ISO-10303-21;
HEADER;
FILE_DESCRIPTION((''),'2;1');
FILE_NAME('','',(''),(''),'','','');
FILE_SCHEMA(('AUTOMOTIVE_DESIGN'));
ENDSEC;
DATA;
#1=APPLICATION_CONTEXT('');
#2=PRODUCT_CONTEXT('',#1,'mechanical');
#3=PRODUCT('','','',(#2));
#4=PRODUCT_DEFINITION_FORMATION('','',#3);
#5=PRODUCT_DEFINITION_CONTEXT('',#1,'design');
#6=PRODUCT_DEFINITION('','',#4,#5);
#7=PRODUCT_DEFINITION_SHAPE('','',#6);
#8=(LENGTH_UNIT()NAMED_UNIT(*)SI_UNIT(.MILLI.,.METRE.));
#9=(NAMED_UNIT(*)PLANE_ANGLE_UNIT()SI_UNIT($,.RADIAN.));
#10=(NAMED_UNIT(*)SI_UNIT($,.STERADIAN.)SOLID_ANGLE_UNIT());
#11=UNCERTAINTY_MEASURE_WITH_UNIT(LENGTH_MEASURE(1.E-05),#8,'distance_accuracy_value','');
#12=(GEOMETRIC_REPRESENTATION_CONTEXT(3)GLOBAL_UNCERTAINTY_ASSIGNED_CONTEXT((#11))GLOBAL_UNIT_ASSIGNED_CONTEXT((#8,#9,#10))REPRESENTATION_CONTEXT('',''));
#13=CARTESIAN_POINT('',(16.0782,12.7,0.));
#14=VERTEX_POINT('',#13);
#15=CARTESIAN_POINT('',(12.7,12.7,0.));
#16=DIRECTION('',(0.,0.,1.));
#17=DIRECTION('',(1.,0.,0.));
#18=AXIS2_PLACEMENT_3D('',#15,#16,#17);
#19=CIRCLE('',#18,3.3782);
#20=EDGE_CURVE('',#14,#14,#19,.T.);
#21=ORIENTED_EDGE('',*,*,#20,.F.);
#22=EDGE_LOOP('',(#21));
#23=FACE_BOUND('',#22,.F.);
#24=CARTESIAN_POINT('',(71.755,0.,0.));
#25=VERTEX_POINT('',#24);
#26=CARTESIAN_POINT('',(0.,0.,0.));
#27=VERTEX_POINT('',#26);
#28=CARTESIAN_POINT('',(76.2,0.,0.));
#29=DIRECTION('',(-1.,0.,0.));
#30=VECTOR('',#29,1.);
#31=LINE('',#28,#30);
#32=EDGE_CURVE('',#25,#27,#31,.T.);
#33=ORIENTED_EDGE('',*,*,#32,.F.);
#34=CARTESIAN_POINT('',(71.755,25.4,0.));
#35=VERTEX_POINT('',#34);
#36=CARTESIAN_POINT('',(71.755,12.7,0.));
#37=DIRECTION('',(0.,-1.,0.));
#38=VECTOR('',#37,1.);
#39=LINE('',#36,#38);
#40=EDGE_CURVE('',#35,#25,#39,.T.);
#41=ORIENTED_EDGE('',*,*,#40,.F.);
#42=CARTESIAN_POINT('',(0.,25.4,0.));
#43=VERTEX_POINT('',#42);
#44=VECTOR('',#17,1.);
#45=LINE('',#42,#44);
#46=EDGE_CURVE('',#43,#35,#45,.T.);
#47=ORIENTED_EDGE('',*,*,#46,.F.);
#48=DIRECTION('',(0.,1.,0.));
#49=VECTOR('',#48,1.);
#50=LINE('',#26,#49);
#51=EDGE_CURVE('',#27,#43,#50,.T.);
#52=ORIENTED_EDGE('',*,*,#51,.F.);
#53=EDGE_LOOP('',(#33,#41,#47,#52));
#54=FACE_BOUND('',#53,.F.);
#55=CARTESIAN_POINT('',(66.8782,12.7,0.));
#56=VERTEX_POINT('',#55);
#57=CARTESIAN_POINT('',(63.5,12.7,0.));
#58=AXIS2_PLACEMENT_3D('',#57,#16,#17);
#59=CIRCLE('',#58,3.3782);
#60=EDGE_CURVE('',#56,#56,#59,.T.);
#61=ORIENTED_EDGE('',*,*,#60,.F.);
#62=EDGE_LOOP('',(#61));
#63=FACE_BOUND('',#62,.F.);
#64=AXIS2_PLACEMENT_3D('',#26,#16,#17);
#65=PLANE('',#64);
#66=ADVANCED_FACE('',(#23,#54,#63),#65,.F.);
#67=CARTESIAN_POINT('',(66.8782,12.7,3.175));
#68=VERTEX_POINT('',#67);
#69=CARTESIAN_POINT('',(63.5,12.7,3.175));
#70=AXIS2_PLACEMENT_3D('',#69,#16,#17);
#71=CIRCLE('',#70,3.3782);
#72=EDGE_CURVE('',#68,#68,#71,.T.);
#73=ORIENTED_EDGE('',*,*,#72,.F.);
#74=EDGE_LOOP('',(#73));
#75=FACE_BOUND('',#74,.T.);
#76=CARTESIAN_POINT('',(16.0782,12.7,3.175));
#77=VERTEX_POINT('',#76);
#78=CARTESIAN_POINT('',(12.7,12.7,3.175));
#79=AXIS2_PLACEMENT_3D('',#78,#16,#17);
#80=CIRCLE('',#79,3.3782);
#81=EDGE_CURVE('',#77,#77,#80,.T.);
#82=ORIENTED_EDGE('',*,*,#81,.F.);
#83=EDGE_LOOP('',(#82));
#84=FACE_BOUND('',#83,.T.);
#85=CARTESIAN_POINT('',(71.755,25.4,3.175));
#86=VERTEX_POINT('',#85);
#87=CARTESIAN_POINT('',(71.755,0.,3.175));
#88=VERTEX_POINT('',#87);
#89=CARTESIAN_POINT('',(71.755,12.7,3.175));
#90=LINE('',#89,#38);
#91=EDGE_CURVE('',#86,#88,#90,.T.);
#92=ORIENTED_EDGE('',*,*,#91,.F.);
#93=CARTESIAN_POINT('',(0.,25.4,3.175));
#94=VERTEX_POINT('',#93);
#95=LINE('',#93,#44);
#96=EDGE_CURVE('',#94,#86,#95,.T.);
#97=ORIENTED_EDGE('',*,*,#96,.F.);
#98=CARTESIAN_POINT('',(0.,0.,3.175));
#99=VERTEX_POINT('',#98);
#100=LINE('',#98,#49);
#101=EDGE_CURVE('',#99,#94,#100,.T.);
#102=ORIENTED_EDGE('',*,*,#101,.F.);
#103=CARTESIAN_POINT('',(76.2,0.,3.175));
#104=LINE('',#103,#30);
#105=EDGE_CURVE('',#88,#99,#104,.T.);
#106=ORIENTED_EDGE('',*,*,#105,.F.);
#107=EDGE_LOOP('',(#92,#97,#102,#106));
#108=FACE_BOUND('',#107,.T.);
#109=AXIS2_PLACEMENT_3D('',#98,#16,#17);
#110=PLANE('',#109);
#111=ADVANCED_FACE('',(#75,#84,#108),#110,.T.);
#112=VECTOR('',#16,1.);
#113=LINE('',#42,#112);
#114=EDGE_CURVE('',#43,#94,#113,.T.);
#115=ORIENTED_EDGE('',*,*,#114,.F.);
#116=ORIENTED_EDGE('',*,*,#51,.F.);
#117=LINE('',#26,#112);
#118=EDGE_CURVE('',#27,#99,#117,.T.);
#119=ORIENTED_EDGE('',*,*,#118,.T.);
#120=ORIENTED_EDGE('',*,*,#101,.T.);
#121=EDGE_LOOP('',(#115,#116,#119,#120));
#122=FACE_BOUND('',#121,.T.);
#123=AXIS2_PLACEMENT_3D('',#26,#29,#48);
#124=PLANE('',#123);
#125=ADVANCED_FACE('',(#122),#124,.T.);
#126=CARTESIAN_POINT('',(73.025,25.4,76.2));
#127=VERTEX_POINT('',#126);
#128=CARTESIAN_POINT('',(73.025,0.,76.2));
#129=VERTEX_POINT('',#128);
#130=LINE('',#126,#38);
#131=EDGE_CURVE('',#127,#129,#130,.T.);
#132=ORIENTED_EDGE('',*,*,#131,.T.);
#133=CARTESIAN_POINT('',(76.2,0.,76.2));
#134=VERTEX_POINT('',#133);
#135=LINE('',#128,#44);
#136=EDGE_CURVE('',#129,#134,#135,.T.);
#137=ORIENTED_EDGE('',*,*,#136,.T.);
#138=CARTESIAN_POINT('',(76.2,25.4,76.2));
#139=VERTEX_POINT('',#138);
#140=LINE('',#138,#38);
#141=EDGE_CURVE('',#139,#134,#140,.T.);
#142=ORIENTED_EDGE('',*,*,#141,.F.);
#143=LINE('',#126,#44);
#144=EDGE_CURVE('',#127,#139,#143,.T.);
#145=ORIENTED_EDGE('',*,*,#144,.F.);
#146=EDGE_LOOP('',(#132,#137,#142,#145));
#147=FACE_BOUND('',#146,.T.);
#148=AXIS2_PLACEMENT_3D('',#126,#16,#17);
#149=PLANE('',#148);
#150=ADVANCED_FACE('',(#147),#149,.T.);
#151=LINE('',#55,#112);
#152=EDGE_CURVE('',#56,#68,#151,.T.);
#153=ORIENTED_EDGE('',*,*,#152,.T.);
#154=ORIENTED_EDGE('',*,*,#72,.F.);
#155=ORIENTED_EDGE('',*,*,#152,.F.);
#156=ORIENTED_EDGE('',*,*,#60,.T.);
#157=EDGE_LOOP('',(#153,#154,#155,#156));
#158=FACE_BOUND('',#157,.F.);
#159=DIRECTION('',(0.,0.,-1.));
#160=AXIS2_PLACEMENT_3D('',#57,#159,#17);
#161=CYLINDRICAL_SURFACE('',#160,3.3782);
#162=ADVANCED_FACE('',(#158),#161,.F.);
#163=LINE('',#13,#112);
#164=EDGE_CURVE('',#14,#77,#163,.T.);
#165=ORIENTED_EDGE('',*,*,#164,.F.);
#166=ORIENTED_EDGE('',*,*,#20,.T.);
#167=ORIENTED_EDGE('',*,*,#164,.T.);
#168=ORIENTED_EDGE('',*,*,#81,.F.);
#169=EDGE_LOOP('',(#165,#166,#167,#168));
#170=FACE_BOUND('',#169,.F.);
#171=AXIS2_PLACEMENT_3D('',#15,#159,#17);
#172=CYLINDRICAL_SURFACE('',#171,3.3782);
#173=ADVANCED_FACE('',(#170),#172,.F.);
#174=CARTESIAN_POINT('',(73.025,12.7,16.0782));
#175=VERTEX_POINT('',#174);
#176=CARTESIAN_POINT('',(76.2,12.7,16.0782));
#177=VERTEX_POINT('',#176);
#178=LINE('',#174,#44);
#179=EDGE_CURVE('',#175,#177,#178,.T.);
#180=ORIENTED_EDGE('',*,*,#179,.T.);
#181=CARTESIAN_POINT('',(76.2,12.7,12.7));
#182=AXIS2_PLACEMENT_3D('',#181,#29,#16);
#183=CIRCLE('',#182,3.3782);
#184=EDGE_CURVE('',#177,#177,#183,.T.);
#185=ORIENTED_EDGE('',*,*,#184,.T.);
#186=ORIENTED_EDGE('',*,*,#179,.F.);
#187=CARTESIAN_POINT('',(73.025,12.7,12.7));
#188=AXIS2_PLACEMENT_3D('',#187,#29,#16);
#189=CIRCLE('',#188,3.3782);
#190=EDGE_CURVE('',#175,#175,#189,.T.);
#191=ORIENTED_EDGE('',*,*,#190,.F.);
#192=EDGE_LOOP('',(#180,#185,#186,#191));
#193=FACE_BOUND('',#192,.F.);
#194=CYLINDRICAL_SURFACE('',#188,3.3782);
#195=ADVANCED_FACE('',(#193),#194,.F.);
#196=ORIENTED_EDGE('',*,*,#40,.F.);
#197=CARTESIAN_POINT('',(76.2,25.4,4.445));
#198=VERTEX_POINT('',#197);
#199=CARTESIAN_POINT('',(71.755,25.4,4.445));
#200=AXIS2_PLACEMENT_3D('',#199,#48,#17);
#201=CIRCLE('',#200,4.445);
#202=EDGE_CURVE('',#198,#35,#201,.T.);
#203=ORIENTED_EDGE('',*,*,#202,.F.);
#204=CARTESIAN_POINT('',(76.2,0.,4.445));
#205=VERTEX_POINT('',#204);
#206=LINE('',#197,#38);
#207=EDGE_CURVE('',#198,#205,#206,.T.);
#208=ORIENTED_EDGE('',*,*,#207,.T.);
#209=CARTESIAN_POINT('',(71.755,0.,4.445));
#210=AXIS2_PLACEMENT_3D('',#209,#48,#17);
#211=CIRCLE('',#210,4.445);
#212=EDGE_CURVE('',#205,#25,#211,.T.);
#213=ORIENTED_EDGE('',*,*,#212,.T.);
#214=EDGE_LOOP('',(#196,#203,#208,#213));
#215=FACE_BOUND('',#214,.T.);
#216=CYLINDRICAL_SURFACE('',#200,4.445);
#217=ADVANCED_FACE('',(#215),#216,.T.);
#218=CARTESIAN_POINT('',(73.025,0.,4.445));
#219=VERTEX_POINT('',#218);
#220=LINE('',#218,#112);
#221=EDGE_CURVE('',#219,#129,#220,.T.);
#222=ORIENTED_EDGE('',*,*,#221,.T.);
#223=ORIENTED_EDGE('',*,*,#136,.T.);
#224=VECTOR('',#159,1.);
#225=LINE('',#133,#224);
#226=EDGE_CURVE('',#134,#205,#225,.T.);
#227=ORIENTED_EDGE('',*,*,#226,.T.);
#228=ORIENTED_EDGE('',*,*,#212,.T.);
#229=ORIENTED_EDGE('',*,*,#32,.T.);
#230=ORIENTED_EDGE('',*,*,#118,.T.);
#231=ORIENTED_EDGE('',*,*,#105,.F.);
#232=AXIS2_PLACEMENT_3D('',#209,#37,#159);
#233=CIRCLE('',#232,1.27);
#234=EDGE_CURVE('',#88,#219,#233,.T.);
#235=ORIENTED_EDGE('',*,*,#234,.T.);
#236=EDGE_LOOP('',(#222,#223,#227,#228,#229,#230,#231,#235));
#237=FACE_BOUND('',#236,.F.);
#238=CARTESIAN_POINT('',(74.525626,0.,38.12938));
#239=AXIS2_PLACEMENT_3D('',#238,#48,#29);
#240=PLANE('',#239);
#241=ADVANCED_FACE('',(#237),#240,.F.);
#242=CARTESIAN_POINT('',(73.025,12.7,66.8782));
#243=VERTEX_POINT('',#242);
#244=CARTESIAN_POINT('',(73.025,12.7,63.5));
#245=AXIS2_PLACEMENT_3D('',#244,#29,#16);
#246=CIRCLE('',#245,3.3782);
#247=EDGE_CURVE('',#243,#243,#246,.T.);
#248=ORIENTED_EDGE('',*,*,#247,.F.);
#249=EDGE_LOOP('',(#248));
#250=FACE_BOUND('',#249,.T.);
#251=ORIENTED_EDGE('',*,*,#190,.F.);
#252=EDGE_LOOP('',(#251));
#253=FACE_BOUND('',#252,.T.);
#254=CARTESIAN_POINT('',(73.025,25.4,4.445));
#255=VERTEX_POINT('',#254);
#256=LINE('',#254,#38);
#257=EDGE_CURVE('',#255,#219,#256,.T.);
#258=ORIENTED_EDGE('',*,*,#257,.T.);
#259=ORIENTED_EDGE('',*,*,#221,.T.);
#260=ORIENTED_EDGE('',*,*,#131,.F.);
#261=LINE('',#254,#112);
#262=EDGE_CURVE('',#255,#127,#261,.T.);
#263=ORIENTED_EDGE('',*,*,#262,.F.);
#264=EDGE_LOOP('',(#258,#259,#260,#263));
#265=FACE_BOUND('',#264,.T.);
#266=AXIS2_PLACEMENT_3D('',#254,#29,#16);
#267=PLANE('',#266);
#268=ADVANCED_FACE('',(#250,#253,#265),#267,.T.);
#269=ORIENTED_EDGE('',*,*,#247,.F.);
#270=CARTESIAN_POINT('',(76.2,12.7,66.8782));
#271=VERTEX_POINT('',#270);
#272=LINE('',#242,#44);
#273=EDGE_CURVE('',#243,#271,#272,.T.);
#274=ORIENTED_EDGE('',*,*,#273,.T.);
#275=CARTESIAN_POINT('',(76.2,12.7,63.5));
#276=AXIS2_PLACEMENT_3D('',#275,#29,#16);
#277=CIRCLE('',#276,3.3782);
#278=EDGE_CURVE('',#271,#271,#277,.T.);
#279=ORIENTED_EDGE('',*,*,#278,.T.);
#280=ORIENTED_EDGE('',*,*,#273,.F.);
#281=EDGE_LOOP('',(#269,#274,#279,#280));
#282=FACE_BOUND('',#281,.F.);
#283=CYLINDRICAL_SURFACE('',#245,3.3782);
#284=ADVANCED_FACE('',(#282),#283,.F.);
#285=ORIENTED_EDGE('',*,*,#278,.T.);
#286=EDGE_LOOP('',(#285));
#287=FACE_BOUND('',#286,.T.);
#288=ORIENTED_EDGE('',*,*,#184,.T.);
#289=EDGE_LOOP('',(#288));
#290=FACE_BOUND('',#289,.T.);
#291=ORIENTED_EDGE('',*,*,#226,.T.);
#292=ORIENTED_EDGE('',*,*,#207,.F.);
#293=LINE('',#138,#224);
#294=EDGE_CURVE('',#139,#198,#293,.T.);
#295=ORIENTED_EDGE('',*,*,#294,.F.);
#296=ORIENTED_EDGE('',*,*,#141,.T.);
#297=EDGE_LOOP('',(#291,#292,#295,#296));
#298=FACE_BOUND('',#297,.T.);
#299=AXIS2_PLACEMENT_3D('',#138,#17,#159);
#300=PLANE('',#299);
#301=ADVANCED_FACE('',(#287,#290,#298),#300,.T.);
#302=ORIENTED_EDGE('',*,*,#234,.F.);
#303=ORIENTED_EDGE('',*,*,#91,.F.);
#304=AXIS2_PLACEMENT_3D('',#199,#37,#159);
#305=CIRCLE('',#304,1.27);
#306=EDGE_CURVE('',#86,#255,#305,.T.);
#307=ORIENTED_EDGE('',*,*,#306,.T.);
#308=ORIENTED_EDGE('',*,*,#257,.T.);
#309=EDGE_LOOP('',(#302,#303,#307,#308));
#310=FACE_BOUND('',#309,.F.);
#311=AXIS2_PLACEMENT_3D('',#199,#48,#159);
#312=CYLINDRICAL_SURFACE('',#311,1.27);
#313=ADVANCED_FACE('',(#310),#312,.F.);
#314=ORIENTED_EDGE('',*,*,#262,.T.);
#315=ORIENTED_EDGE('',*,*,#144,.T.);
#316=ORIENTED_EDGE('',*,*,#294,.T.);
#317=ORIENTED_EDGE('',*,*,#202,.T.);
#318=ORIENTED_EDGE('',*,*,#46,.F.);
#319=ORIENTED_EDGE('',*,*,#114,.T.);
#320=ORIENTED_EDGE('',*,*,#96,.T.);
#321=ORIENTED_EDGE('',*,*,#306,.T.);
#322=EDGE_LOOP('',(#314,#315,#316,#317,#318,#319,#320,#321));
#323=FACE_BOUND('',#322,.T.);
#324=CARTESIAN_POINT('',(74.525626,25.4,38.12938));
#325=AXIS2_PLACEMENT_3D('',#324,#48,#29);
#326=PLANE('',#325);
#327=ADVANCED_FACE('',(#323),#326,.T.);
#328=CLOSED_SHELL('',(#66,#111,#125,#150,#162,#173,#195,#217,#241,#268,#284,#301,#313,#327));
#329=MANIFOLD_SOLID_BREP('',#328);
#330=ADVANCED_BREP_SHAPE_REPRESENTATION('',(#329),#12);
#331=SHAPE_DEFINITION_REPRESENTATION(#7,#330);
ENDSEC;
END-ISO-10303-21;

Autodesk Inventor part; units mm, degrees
ref_plane "YZ Plane" through (0, 0, 0) normal (1, 0, 0) x (0, 1, 0)
ref_plane "XZ Plane" through (0, 0, 0) normal (0, 1, 0) x (-1, 0, 0)
ref_plane "XY Plane" through (0, 0, 0) normal (0, 0, 1) x (1, 0, 0)
sketch "Sketch1" plane through (0, 0, 0) normal (0, 0, 1) x (1, 0, 0)
  line L0 (0, 0) -> (147.699314, 0)
  line L1 (147.699314, -25.4) -> (0, -25.4)
  line L2 (0, 0) -> (73.8378, 0)
  line L3 (73.8378, 0) -> (73.8378, -3.175)
  line L4 (73.8378, -3.175) -> (72.2503, -3.175)
  line L5 (72.2503, -3.175) -> (72.2503, -9.525)
  line L6 (72.2503, -9.525) -> (75.4253, -9.525)
  line L7 (75.4253, -9.525) -> (75.4253, -3.175)
  line L8 (75.4253, -3.175) -> (73.8378, -3.175)
  line L9 (73.849657, -25.4) -> (73.849657, -22.225)
  line L10 (73.849657, -22.225) -> (72.2503, -22.225)
  line L11 (72.2503, -22.225) -> (72.2503, -15.875)
  line L12 (72.2503, -15.875) -> (75.4253, -15.875)
  line L13 (75.4253, -15.875) -> (75.4253, -22.225)
  line L14 (75.4253, -22.225) -> (73.849657, -22.225)
sketch "Sketch3" plane through (73.025, 0, 76.2) normal (-1, 0, 0) x (0, 0, 1)
  line L0 (0, 0) -> (-71.755, 0) projected
  line L1 (0, 0) -> (0, 25.4) projected
  circle A0 centre (-12.7, 12.7) radius 3.3782
  circle A1 centre (-63.5, 12.7) radius 3.3782
  point P0 (-76.2, 0)
  dimension "d19" = 6.7564
  dimension "d20" = 6.7564
  dimension "d22" = 12.7
  dimension "d23" = 12.7
  dimension "d24" = 12.7
  dimension "d27" = 50.8
sketch "Sketch1 outline for Plate1" plane through (0, 0, 0) normal (0, 0, 1) x (1, 0, 0)
  line L0 (0, 0) -> (0, 25.4)
  line L1 (76.2, 0) -> (0, 0)
  line L2 (0, 25.4) -> (76.2, 25.4)
  line L3 (76.2, 25.4) -> (76.2, 0)
  circle A0 centre (12.7, 12.7) radius 3.3782
  circle A1 centre (63.5, 12.7) radius 3.3782
extrude "Plate1" add sketch "Sketch1 outline for Plate1" along normal blind 3.175
sketch "Sketch2" plane through (73.025, 25.4, 0) normal (1, 0, 0) x (0, 1, 0)
  line L0 (-25.4, 0) -> (0, 0)
  line L1 (0, 0) -> (0, 76.2)
  line L2 (0, 76.2) -> (-25.4, 76.2)
  line L3 (-25.4, 76.2) -> (-25.4, 0)
edge flange "Flange1" height 76.2 angle 90 thickness 3.175 bend radius 1.27 thickness toward (1, 0, 0) relief tear relief width 3.175 relief depth 1.5875 edges at (76.2, 12.7, 3.175) wall of the first edge with corners at (73.025, 0, 0) (73.025, 25.4, 0) (73.025, 25.4, 76.2) (73.025, 0, 76.2)
bend "Bend1"
corner "Corner1"
extrude "Cut1" cut sketch "Sketch3" against normal blind 3.175
equation "\"d9\" = BendReliefWidth"
equation "\"d10\" = BendReliefDepth"
equation "\"d11\" = MinimumRemnant"
equation "\"d12\" = BendRadius"
equation "\"d16\" = CornerReliefSize"
equation "\"d17\" = GapSize"
equation "\"d18\" = JacobiRadiusSize"
equation "\"BendRadius\" = Thickness"
equation "\"BendReliefWidth\" = Thickness"
equation "\"BendReliefDepth\" = 0.5 * Thickness"
equation "\"CornerReliefSize\" = 4 * Thickness"
equation "\"MinimumRemnant\" = 2 * Thickness"
equation "\"TransitionRadius\" = BendRadius"
equation "\"JacobiRadiusSize\" = BendRadius"
equation "\"GapSize\" = Thickness"
equation "\"d8\" = BendRadius"
equation "\"d7\" = Thickness"
equation "\"Thickness\" = 3.175"
properties part number "Rebuild Gusset" material "Aluminum 6061"
